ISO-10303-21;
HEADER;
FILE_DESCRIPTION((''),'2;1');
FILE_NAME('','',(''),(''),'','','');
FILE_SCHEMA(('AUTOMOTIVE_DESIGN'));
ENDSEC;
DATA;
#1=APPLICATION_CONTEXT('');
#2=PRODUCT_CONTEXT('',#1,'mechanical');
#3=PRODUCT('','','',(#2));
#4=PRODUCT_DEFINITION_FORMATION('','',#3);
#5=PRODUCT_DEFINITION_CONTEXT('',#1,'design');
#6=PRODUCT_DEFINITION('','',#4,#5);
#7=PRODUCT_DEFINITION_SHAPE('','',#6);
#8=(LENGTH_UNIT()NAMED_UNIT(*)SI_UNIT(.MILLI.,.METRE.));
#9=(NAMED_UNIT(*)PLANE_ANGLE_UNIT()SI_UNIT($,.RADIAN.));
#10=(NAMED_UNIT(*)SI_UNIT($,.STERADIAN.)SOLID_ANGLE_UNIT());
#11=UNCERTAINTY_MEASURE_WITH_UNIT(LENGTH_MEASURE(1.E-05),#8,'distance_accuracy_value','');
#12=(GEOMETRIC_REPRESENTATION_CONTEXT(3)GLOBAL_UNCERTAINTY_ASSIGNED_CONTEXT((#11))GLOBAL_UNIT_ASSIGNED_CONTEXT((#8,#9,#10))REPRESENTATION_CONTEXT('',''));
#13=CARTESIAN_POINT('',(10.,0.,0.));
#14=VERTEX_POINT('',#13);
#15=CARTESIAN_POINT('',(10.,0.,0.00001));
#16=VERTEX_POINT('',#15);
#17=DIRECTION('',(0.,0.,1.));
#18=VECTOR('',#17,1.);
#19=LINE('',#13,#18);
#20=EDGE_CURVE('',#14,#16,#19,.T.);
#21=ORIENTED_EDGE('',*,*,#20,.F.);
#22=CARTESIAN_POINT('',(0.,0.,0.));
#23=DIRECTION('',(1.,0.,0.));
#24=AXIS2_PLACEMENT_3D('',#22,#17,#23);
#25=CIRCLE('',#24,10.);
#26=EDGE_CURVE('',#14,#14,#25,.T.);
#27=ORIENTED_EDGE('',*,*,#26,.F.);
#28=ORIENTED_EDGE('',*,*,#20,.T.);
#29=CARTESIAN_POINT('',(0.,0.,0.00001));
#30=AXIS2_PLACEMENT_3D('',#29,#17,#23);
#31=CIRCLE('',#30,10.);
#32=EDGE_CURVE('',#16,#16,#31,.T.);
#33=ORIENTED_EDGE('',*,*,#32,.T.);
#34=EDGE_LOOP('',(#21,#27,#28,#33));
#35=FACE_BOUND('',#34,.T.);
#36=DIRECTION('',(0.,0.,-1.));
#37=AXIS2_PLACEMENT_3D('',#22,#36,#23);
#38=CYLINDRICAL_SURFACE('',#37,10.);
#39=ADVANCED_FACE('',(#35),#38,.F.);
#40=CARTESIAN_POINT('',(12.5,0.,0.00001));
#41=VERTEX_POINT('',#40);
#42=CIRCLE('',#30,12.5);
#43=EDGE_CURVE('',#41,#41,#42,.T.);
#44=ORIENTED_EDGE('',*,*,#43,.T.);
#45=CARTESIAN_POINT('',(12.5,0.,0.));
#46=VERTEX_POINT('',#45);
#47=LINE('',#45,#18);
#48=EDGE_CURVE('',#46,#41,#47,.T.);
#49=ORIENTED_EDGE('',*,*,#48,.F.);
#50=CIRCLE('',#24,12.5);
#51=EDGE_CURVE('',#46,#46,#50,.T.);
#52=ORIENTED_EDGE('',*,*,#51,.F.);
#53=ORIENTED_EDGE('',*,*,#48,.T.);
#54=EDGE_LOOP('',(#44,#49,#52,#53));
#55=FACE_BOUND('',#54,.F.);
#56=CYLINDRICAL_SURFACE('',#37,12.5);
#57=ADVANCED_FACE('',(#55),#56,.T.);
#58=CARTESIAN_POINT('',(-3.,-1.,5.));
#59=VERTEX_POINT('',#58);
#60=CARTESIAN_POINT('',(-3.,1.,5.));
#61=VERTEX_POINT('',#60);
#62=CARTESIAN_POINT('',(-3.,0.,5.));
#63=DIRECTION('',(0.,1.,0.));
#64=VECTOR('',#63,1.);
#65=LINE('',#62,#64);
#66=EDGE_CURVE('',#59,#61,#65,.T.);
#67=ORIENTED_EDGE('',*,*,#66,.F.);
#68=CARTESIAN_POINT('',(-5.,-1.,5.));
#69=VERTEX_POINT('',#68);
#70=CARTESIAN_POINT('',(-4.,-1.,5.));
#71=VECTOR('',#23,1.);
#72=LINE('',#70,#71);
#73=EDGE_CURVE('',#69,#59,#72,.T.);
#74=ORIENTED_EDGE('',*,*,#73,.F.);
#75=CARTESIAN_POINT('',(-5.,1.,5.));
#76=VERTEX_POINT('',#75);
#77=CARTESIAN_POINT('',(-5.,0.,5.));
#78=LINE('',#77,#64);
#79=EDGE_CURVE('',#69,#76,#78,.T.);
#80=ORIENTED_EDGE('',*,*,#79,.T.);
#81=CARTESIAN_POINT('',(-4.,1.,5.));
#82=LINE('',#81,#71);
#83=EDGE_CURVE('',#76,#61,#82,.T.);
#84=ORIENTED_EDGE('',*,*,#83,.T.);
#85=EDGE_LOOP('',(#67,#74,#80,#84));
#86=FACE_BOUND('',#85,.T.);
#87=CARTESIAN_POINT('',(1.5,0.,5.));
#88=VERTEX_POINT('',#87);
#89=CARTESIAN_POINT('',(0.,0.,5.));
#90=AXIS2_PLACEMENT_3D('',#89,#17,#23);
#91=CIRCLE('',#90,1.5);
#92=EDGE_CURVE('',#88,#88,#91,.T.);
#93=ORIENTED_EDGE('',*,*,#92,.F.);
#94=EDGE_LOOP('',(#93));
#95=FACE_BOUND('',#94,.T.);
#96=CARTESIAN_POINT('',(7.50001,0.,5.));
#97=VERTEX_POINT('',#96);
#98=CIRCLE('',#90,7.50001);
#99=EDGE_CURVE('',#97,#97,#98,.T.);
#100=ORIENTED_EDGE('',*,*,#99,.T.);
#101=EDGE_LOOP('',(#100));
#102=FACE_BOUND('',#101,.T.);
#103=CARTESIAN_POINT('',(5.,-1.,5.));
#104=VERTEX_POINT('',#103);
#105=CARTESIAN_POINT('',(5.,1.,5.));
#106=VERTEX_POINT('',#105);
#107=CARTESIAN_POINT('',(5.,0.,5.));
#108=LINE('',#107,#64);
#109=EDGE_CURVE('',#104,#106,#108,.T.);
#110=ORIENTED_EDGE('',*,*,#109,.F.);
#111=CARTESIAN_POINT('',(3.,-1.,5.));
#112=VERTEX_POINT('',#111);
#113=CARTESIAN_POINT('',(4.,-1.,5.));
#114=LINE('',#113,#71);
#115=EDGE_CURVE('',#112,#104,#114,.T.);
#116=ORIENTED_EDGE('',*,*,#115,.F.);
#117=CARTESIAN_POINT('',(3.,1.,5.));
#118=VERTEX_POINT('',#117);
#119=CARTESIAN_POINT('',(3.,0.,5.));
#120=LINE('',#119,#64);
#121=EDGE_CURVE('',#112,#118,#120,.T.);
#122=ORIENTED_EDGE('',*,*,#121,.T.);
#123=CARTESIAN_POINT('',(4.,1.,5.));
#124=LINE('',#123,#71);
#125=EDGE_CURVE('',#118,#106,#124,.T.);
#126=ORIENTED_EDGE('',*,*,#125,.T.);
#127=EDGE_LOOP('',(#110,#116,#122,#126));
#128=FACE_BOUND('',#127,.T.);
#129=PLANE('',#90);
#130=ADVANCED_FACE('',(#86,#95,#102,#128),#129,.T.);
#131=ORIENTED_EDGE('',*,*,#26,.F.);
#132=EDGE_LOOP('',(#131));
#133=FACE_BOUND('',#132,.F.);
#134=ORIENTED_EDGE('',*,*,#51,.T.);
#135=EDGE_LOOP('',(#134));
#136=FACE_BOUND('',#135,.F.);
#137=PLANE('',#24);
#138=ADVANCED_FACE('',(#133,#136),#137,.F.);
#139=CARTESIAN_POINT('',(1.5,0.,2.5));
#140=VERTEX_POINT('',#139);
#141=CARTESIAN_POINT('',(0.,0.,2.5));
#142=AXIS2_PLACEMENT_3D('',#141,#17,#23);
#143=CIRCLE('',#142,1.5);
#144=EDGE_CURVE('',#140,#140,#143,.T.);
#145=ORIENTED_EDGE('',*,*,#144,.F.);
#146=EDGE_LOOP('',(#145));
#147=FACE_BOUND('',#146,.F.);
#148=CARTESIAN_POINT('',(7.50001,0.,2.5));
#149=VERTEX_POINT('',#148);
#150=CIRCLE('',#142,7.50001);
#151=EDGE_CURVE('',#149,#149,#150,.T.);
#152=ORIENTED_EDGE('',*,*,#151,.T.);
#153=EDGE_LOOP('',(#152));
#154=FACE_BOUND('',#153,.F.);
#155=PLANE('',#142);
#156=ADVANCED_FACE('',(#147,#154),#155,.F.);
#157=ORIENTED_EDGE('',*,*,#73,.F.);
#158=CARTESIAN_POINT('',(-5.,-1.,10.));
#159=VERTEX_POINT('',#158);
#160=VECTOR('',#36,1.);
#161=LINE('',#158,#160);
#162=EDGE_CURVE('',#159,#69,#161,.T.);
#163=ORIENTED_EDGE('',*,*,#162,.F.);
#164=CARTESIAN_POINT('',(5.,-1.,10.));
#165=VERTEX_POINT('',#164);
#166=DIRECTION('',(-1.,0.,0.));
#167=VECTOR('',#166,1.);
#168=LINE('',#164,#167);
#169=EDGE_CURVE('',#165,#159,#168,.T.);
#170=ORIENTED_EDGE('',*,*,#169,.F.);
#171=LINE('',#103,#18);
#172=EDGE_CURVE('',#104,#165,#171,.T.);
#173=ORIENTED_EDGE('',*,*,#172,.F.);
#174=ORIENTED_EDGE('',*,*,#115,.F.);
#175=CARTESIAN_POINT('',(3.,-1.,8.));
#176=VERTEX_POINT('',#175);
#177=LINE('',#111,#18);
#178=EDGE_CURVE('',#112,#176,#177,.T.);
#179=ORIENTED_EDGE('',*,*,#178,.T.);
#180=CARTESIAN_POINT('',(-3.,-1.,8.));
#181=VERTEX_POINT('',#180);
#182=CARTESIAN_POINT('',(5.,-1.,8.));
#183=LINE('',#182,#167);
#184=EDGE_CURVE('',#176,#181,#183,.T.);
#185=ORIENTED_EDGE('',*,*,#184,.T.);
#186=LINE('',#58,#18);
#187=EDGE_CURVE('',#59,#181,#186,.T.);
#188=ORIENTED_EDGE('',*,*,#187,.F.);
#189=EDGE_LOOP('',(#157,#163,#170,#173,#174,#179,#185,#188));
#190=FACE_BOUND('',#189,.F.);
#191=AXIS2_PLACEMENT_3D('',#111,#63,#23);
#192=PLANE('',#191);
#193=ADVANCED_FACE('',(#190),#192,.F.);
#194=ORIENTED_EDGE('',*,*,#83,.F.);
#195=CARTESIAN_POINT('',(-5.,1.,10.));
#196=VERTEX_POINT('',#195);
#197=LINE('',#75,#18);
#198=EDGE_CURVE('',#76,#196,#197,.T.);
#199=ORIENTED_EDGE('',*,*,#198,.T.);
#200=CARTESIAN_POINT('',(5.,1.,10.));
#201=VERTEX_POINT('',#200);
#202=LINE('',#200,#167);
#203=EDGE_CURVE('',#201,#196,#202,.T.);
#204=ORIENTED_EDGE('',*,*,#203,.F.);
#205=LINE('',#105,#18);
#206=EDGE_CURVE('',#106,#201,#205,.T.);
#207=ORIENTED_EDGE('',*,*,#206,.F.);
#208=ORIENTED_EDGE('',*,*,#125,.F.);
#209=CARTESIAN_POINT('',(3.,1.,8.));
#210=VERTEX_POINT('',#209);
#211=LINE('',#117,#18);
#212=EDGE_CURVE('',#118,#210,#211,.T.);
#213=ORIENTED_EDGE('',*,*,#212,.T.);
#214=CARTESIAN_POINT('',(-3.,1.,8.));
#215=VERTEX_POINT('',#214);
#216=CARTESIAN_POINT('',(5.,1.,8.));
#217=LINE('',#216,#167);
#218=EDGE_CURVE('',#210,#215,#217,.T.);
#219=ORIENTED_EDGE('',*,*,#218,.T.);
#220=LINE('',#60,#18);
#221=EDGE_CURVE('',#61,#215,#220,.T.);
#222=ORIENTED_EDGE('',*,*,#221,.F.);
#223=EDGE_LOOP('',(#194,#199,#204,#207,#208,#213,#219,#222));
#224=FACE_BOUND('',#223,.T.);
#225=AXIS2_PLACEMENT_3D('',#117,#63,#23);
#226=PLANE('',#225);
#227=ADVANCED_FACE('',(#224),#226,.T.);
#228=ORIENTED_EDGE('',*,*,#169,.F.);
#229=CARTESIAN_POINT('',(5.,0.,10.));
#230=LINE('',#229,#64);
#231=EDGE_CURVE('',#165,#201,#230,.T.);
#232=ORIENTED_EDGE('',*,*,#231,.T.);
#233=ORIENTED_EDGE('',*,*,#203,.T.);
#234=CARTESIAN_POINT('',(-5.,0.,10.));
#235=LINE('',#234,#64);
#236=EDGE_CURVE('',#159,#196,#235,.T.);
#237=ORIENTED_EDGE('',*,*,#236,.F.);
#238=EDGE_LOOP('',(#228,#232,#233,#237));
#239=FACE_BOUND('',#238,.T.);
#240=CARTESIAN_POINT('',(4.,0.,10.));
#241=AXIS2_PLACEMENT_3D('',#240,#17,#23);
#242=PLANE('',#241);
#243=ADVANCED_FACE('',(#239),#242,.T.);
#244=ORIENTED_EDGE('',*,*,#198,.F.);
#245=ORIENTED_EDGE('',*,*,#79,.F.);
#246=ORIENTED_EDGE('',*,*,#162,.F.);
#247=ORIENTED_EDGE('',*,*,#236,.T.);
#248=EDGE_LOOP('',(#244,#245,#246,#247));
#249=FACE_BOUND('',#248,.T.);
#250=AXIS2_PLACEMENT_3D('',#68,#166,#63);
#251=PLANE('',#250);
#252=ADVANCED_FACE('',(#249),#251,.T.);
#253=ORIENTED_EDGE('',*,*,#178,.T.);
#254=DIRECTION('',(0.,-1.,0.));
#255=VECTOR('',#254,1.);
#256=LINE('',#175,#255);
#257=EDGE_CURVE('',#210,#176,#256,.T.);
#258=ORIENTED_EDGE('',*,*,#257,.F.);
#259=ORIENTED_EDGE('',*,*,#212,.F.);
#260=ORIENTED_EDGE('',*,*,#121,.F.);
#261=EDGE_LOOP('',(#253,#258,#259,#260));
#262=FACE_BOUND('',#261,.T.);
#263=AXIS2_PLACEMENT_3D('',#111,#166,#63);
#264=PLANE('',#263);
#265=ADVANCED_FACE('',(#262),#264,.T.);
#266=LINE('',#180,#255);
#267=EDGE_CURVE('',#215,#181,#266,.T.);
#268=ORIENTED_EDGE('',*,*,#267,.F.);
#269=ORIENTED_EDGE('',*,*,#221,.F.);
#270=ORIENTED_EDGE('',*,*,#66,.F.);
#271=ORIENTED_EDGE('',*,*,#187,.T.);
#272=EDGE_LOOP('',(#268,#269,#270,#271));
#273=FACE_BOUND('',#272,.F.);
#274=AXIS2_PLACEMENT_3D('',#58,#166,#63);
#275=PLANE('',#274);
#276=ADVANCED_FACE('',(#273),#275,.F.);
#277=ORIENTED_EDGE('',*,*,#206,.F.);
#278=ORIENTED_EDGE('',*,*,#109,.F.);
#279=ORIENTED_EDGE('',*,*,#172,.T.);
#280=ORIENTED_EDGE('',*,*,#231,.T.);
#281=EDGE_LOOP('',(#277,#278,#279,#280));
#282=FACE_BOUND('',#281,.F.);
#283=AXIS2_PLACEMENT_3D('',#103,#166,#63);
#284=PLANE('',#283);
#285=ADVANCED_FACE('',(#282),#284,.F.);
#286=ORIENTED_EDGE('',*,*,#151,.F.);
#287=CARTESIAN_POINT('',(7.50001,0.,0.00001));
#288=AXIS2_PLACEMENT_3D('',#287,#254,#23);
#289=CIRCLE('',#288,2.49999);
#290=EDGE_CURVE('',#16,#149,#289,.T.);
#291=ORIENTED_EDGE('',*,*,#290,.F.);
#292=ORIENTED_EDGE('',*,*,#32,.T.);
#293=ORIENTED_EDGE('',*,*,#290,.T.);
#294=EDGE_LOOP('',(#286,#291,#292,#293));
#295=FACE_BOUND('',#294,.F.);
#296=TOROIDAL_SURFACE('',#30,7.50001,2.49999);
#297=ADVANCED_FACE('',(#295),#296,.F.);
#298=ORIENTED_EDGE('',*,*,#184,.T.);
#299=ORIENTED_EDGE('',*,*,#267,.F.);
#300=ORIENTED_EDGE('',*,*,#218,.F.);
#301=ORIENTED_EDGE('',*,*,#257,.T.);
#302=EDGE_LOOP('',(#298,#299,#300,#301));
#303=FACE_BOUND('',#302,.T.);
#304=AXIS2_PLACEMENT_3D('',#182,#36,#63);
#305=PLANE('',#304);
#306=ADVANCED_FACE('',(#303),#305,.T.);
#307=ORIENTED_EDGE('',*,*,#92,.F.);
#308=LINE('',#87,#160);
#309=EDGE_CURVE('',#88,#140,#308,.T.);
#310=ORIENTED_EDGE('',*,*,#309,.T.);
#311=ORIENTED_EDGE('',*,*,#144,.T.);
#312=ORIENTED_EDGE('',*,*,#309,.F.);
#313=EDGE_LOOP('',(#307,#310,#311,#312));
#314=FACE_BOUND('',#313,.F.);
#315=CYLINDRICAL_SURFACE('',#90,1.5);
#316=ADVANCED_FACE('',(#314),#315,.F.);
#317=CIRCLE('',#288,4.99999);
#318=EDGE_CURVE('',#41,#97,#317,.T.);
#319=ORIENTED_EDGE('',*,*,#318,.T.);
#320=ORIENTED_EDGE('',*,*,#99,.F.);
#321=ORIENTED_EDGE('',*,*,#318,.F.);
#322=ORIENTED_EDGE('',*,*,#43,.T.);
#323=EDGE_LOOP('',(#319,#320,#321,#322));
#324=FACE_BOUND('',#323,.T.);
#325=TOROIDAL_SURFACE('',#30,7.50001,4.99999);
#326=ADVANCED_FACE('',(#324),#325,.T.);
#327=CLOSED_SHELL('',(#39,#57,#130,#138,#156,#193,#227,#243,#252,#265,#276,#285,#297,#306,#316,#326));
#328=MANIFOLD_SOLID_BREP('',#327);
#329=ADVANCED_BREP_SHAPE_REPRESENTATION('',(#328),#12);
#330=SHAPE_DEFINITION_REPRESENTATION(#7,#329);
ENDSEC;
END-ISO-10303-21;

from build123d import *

# Parameters (mm, degrees)
F0_R     = 12.5
F1_DEPTH = 5
F2_R     = 4.99999
F3_T     = 2.5
F4_R     = 1.5
F5_DEPTH = 25
F6_W     = 2
F6_H     = 2
F7_DEPTH = 5
F8_W     = 2
F8_H     = 2
F9_DEPTH = 10


# Not quite as in the source:
# - a fillet or chamfer is up to 0.001 mm smaller than in the source, because OpenCascade refuses the exact size
# - a shell that OpenCascade refuses in one call is made with other operations: the cavity is built on its own and cut out


with BuildPart() as f1:
    # F0 (on Top) → F1 (new body)
    with BuildSketch(Plane.XY):
        Circle(F0_R)
    extrude(amount=F1_DEPTH)

    # F2 (radius 5 in the source; OpenCascade refuses exactly that, so slightly less here)
    f2_edges = [f1.edges().sort_by_distance(p)[0] for p in [
        (-12.5, 0, 5),
    ]]
    fillet(f2_edges, radius=F2_R)

    # F3: shell of thickness 2.5, made by hand


with BuildPart() as f3_core1:
    # F3_t2: copy of F1
    add(f1.part)

    # the walls: a layer under each face that stays
    f3_faces = [f3_core1.faces().sort_by_distance(p)[0] for p in [
        (-12.5, 0, 5e-06),
        (-11.0355368349, 0, 3.5355368349),
        (0, 0, 5),
    ]]
    thicken(f3_faces, amount=-F3_T, mode=Mode.SUBTRACT)


with BuildPart() as f1_1:
    add(f1.part)

    # what is left inside the walls is the cavity
    f3_cavity = [f3_core1.part.solids().sort_by_distance(p)[0] for p in [
        (0, -3.333333, 0.025),
    ]]
    add(f3_cavity, mode=Mode.SUBTRACT)

    # F4 (on face) → F5 (cut)
    with BuildSketch(Plane.XY.offset(5)):
        Circle(F4_R)
    extrude(amount=-F5_DEPTH, mode=Mode.SUBTRACT)

    # F6 (on face) → F7 (join)
    with BuildSketch(Plane.XY.offset(5)):
        with Locations((4, 0)):
            Rectangle(F6_W, F6_H)
        with Locations((-4, 0)):
            Rectangle(F6_W, F6_H)
    extrude(amount=F7_DEPTH)

    # F8 (on face) → F9 (join)
    with BuildSketch(Plane.YZ.offset(5)):
        with Locations((0, 9)):
            Rectangle(F8_W, F8_H)
    extrude(amount=-F9_DEPTH)


solid = f1_1.part
